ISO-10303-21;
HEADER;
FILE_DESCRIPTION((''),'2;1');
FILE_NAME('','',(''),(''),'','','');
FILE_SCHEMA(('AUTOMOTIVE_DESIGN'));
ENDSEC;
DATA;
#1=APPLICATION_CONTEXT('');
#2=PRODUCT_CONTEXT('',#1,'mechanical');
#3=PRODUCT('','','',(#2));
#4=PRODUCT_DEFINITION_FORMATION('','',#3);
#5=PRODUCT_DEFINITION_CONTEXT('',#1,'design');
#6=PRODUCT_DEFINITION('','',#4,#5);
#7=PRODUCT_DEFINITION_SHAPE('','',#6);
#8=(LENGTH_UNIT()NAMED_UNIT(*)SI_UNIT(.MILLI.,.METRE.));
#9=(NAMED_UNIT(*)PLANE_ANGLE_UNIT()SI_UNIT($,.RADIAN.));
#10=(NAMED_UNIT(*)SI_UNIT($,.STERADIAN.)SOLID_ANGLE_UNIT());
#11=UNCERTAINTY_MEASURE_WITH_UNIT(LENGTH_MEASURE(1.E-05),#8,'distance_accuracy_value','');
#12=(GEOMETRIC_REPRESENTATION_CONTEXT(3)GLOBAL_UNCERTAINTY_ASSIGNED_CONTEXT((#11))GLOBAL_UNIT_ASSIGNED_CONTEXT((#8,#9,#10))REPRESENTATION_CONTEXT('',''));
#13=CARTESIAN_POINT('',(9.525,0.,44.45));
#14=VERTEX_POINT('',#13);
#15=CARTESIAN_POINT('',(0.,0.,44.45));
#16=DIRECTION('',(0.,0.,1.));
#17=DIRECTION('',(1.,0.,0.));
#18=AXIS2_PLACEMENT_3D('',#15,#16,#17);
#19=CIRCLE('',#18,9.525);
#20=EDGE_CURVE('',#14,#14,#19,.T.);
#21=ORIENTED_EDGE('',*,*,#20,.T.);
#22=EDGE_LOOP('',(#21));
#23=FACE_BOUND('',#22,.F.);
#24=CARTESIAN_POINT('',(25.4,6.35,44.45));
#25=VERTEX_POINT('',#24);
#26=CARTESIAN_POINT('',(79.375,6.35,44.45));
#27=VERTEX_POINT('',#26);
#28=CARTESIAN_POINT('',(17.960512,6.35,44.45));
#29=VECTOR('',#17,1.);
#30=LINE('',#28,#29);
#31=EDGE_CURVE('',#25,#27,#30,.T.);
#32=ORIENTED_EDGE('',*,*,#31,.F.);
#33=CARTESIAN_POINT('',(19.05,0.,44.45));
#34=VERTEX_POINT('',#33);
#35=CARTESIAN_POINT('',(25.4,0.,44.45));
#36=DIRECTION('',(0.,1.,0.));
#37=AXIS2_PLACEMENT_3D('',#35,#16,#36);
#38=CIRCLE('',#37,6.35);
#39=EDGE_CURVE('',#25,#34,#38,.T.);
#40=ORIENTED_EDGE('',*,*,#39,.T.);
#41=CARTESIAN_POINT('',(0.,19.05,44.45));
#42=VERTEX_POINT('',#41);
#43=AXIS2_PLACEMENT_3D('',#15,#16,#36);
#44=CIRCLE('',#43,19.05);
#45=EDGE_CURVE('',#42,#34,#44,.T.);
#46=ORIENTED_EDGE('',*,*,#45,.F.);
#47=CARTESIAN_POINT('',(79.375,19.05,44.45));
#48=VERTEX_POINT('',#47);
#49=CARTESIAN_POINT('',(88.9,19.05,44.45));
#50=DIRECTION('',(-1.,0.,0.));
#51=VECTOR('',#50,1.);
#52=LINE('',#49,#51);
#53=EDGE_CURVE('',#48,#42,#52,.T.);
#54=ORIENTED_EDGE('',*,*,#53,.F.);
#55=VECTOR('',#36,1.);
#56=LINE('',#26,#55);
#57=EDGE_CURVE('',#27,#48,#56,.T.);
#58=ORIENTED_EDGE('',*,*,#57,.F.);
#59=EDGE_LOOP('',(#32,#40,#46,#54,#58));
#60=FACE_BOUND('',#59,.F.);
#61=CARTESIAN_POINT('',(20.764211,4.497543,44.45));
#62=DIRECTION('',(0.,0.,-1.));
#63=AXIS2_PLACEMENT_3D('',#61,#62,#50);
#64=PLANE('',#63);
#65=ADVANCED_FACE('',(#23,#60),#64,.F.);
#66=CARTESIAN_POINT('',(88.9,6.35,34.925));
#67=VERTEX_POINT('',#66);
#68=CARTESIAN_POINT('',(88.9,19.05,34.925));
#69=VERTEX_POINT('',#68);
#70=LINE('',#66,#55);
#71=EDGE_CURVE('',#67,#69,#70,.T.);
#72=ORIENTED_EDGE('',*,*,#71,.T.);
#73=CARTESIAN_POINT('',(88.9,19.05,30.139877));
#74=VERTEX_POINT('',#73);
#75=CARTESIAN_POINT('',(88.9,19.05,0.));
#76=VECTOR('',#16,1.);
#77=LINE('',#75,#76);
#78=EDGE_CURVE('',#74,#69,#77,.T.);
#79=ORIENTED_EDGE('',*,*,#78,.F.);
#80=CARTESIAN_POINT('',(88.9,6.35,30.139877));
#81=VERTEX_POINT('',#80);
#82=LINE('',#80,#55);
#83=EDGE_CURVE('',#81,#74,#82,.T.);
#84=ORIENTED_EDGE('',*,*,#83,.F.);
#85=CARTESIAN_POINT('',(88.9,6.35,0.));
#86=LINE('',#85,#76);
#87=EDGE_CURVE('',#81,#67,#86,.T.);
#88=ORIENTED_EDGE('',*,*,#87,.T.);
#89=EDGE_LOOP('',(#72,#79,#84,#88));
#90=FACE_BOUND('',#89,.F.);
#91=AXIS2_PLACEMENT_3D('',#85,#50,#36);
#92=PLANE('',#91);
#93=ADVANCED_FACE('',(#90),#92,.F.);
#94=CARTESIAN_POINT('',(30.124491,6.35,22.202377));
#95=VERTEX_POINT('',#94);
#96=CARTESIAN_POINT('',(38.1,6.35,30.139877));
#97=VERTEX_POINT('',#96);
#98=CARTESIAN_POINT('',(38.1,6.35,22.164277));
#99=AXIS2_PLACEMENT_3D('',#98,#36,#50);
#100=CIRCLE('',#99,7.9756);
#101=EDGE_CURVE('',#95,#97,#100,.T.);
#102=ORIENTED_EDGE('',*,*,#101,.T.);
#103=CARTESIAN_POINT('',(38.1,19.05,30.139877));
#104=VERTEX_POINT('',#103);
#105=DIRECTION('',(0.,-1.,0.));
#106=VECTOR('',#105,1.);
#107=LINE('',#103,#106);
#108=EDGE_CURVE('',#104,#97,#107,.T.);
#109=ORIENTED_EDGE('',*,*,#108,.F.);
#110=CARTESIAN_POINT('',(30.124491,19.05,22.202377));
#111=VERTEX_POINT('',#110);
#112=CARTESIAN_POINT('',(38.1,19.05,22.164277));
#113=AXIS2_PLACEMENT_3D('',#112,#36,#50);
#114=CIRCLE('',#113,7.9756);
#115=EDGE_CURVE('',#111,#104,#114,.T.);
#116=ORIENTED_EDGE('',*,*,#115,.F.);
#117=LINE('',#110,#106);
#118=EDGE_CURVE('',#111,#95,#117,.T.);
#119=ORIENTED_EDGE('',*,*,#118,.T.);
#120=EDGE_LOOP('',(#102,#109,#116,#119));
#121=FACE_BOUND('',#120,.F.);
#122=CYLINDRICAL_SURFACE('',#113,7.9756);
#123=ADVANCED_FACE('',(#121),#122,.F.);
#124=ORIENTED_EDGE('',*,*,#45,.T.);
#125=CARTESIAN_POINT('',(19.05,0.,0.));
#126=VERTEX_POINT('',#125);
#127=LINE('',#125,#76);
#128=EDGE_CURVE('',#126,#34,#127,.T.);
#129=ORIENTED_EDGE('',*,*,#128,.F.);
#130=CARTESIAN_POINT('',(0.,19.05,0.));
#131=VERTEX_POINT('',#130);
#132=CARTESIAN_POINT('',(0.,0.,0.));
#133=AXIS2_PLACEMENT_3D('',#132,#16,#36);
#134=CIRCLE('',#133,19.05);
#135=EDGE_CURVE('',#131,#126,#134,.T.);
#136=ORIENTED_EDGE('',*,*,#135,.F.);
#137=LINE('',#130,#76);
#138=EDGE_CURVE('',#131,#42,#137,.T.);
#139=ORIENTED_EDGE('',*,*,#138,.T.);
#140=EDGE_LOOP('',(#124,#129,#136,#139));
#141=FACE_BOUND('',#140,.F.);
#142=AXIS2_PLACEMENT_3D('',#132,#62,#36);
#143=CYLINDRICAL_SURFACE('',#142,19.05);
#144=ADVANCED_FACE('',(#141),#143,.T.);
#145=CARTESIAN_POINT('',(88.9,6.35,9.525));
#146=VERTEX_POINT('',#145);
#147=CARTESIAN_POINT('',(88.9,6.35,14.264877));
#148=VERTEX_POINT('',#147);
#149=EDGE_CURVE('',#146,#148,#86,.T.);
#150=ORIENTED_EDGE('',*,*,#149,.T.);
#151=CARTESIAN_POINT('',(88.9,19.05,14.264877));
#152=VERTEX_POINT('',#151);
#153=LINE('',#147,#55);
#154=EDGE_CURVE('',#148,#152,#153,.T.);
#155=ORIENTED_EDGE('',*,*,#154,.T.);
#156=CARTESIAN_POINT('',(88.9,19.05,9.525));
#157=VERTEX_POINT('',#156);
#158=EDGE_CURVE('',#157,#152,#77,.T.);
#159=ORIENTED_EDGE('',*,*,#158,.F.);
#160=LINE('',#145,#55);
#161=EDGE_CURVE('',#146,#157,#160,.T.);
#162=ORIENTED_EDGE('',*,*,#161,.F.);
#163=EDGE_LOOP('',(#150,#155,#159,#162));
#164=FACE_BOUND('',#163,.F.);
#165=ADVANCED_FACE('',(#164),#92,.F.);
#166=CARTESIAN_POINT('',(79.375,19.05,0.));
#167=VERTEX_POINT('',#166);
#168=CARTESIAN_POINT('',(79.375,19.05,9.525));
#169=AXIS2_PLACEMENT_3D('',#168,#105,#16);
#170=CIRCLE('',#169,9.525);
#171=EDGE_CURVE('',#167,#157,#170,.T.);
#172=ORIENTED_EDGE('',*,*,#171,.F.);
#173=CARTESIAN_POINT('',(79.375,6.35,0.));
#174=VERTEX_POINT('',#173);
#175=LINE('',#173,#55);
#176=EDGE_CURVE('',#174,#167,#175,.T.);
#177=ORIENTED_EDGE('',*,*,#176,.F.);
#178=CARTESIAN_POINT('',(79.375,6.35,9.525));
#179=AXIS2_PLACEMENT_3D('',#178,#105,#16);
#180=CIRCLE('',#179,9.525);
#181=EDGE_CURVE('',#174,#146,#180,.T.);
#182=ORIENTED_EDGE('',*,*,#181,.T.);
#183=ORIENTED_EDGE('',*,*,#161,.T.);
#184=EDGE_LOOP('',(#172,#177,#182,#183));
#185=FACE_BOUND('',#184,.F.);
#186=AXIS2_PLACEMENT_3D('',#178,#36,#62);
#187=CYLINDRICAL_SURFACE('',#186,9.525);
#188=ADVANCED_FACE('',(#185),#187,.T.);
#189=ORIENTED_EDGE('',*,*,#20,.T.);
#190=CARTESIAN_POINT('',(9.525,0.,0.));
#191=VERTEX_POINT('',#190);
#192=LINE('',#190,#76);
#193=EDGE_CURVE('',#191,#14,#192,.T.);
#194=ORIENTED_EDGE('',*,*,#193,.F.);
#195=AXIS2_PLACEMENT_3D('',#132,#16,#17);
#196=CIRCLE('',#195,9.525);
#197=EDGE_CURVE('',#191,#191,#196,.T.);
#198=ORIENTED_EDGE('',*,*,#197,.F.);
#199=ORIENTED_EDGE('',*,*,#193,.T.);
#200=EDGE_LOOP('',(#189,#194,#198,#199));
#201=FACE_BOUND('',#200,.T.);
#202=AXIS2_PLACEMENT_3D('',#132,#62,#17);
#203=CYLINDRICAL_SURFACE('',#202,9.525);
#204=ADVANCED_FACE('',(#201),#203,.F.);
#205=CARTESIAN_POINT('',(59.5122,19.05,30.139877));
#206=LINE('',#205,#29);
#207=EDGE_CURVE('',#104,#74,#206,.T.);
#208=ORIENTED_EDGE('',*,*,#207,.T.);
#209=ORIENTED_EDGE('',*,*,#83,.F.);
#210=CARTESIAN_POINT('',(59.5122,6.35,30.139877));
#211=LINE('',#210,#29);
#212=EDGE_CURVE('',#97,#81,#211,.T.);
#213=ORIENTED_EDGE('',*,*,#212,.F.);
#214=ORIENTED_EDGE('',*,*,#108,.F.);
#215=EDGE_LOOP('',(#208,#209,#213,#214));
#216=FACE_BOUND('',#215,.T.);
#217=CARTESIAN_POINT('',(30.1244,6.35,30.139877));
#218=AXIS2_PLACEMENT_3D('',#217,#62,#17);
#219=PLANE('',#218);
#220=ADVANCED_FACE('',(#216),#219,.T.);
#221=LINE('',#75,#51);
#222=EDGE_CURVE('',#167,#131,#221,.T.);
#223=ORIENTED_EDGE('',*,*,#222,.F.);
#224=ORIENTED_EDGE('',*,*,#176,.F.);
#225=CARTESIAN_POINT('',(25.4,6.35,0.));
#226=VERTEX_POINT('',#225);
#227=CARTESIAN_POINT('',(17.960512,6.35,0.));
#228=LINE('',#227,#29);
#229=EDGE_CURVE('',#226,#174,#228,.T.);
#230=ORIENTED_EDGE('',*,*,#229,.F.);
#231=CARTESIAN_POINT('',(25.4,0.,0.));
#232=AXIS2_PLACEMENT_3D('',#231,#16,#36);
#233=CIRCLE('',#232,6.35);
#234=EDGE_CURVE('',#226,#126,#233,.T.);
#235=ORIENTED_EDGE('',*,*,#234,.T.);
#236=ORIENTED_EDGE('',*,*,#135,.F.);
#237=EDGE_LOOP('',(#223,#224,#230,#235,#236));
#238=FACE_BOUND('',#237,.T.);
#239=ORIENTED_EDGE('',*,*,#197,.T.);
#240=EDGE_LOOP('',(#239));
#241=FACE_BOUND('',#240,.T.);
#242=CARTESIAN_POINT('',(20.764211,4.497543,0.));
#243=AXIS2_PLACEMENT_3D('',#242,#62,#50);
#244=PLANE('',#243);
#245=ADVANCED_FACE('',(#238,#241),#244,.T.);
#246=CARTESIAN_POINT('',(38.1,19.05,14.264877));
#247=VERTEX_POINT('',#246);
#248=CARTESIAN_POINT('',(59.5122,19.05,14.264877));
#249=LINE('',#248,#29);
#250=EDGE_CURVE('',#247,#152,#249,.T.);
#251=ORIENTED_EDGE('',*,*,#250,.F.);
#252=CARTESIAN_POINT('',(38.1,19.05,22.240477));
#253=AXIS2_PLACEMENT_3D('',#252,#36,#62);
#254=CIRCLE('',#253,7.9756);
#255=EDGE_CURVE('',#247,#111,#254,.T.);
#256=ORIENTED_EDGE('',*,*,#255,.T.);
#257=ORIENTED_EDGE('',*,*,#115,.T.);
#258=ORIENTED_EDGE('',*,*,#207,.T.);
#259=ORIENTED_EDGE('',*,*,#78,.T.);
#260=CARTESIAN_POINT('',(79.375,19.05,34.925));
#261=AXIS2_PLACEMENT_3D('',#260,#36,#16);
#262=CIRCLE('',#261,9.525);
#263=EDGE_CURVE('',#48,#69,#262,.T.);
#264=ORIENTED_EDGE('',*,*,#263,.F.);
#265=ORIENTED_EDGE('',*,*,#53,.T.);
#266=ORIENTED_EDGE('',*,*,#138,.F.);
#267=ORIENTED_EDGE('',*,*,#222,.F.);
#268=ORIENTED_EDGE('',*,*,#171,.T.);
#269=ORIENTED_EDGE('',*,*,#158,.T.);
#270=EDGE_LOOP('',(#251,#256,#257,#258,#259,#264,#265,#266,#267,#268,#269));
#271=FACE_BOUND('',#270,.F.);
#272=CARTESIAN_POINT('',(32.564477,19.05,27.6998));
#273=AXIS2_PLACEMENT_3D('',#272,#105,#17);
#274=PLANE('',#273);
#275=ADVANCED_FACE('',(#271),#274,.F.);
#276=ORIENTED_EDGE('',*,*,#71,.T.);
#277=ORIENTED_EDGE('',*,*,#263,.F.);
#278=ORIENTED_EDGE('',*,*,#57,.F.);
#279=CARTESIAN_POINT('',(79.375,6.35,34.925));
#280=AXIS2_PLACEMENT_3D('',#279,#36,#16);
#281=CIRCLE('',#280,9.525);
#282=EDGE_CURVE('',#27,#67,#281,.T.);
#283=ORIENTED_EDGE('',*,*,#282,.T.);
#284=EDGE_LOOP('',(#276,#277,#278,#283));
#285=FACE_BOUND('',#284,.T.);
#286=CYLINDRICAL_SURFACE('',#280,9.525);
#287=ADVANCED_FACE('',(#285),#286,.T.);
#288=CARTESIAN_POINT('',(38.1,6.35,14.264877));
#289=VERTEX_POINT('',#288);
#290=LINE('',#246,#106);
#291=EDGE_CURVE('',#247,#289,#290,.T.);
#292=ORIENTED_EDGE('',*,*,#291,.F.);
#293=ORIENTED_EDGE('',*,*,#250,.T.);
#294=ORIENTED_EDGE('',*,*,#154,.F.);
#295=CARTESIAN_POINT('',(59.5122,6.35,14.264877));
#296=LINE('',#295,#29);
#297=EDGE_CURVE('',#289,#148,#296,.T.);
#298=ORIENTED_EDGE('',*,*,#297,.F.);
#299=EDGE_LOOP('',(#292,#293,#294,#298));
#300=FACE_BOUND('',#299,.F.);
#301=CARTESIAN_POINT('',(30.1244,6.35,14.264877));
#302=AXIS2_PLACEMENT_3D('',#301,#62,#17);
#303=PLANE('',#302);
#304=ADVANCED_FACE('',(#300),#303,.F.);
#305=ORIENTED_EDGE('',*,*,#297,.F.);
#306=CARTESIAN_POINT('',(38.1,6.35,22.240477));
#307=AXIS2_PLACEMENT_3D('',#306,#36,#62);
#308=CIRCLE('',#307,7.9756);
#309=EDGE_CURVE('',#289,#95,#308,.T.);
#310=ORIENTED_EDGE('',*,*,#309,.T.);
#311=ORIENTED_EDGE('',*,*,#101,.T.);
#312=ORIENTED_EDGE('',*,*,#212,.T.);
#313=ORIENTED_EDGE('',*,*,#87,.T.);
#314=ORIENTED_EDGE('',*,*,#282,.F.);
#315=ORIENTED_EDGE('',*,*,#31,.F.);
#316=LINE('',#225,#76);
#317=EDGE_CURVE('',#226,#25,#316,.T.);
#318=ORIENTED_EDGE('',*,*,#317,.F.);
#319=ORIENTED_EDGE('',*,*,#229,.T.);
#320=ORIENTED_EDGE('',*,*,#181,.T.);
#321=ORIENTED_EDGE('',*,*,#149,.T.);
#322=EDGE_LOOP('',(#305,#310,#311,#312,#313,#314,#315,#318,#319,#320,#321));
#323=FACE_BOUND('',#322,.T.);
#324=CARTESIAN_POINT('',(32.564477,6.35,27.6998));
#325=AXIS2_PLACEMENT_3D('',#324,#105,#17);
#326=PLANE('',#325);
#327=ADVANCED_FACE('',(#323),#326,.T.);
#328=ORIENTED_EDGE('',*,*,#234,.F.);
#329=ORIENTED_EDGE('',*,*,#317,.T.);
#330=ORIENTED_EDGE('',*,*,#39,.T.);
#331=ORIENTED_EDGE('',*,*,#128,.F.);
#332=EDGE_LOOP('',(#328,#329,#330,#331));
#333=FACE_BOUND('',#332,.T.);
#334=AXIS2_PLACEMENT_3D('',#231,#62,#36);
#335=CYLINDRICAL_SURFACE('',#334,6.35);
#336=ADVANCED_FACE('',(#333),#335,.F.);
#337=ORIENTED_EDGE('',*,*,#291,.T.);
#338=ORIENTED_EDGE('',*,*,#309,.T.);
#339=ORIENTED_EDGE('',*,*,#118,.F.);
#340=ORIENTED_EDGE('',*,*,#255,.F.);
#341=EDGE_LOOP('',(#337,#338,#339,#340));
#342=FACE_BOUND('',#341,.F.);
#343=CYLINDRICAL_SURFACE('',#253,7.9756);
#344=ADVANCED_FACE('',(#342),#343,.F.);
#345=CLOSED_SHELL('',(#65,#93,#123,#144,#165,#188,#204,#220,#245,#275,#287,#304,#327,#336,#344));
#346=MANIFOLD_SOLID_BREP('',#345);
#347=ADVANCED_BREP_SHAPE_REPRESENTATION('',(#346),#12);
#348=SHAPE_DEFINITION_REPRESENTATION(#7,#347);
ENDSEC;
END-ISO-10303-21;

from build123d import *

# Parameters (mm, degrees)
F0_R        = 9.525
F1_DEPTH    = 44.45
F2_T1_DEPTH = 44.45
F3_R        = 9.525
F4_W        = 58.7756
F4_H        = 15.875
F5_DEPTH    = 25.4
F6_T1_DEPTH = 12.7


# Not quite as in the source:
# - a fillet or chamfer that OpenCascade refuses, or shapes differently, is made with other operations: its cross-section is extruded or revolved along the edge and cut away or added


with BuildPart() as f1:
    # F0 (on Top) → F1 (new body)
    with BuildSketch(Plane.XY):
        with BuildLine():
            ThreePointArc((0, 19.05), (10.9985226281, 15.5542598667), (17.9605122421, 6.35))
            Line((17.9605122421, 6.35), (88.9, 6.35))
            Line((88.9, 6.35), (88.9, 19.05))
            Line((88.9, 19.05), (0, 19.05))
        make_face()
        with BuildLine():
            ThreePointArc((0, 19.05), (-13.4703841816, -13.4703841816), (19.05, 0))
            ThreePointArc((19.05, 0), (18.7756525614, 3.2213926947), (17.9605122421, 6.35))
            ThreePointArc((17.9605122421, 6.35), (10.9985226281, 15.5542598667), (0, 19.05))
        make_face()
        Circle(F0_R, mode=Mode.SUBTRACT)
    extrude(amount=F1_DEPTH)

    # F2: fillet of radius 6.35 on 1 edges, made by hand

    # F2_s2 → F2_t1 (join)
    with BuildSketch(Plane.XY):
        with BuildLine():
            ThreePointArc((25.4, 6.35), (20.9098719395, 4.4901280605), (19.05, 0))
            ThreePointArc((19.05, 0), (18.7756525614, 3.2213926947), (17.9605122421, 6.35))
            Line((17.9605122421, 6.35), (25.4, 6.35))
        make_face()
    extrude(amount=F2_T1_DEPTH)

    # F3
    f3_edges = [f1.edges().sort_by_distance(p)[0] for p in [
        (88.9, 12.7, 44.45),
        (88.9, 12.7, 0),
    ]]
    fillet(f3_edges, radius=F3_R)

    # F4 (on face) → F5 (cut)
    with BuildSketch(Plane.XZ.offset(-6.35)):
        with Locations((59.5122, 22.2023769543)):
            Rectangle(F4_W, F4_H)
    extrude(amount=-F5_DEPTH, mode=Mode.SUBTRACT)

    # F6: fillet of radius 7.9756 on 2 edges, made by hand

    # F6_s2 → F6_t1 (join)
    with BuildSketch(Plane.XZ.offset(-19.05)):
        with BuildLine():
            ThreePointArc((30.1244, 22.1642769543), (32.460399156, 27.8038777983), (38.1, 30.1398769543))
            Line((38.1, 30.1398769543), (30.1244, 30.1398769543))
            Line((30.1244, 30.1398769543), (30.1244, 22.1642769543))
        make_face()
        with BuildLine():
            ThreePointArc((38.1, 14.2648769543), (32.460399156, 16.6008761102), (30.1244, 22.2404769543))
            Line((30.1244, 22.2404769543), (30.1244, 14.2648769543))
            Line((30.1244, 14.2648769543), (38.1, 14.2648769543))
        make_face()
    extrude(amount=F6_T1_DEPTH)


solid = f1.part
